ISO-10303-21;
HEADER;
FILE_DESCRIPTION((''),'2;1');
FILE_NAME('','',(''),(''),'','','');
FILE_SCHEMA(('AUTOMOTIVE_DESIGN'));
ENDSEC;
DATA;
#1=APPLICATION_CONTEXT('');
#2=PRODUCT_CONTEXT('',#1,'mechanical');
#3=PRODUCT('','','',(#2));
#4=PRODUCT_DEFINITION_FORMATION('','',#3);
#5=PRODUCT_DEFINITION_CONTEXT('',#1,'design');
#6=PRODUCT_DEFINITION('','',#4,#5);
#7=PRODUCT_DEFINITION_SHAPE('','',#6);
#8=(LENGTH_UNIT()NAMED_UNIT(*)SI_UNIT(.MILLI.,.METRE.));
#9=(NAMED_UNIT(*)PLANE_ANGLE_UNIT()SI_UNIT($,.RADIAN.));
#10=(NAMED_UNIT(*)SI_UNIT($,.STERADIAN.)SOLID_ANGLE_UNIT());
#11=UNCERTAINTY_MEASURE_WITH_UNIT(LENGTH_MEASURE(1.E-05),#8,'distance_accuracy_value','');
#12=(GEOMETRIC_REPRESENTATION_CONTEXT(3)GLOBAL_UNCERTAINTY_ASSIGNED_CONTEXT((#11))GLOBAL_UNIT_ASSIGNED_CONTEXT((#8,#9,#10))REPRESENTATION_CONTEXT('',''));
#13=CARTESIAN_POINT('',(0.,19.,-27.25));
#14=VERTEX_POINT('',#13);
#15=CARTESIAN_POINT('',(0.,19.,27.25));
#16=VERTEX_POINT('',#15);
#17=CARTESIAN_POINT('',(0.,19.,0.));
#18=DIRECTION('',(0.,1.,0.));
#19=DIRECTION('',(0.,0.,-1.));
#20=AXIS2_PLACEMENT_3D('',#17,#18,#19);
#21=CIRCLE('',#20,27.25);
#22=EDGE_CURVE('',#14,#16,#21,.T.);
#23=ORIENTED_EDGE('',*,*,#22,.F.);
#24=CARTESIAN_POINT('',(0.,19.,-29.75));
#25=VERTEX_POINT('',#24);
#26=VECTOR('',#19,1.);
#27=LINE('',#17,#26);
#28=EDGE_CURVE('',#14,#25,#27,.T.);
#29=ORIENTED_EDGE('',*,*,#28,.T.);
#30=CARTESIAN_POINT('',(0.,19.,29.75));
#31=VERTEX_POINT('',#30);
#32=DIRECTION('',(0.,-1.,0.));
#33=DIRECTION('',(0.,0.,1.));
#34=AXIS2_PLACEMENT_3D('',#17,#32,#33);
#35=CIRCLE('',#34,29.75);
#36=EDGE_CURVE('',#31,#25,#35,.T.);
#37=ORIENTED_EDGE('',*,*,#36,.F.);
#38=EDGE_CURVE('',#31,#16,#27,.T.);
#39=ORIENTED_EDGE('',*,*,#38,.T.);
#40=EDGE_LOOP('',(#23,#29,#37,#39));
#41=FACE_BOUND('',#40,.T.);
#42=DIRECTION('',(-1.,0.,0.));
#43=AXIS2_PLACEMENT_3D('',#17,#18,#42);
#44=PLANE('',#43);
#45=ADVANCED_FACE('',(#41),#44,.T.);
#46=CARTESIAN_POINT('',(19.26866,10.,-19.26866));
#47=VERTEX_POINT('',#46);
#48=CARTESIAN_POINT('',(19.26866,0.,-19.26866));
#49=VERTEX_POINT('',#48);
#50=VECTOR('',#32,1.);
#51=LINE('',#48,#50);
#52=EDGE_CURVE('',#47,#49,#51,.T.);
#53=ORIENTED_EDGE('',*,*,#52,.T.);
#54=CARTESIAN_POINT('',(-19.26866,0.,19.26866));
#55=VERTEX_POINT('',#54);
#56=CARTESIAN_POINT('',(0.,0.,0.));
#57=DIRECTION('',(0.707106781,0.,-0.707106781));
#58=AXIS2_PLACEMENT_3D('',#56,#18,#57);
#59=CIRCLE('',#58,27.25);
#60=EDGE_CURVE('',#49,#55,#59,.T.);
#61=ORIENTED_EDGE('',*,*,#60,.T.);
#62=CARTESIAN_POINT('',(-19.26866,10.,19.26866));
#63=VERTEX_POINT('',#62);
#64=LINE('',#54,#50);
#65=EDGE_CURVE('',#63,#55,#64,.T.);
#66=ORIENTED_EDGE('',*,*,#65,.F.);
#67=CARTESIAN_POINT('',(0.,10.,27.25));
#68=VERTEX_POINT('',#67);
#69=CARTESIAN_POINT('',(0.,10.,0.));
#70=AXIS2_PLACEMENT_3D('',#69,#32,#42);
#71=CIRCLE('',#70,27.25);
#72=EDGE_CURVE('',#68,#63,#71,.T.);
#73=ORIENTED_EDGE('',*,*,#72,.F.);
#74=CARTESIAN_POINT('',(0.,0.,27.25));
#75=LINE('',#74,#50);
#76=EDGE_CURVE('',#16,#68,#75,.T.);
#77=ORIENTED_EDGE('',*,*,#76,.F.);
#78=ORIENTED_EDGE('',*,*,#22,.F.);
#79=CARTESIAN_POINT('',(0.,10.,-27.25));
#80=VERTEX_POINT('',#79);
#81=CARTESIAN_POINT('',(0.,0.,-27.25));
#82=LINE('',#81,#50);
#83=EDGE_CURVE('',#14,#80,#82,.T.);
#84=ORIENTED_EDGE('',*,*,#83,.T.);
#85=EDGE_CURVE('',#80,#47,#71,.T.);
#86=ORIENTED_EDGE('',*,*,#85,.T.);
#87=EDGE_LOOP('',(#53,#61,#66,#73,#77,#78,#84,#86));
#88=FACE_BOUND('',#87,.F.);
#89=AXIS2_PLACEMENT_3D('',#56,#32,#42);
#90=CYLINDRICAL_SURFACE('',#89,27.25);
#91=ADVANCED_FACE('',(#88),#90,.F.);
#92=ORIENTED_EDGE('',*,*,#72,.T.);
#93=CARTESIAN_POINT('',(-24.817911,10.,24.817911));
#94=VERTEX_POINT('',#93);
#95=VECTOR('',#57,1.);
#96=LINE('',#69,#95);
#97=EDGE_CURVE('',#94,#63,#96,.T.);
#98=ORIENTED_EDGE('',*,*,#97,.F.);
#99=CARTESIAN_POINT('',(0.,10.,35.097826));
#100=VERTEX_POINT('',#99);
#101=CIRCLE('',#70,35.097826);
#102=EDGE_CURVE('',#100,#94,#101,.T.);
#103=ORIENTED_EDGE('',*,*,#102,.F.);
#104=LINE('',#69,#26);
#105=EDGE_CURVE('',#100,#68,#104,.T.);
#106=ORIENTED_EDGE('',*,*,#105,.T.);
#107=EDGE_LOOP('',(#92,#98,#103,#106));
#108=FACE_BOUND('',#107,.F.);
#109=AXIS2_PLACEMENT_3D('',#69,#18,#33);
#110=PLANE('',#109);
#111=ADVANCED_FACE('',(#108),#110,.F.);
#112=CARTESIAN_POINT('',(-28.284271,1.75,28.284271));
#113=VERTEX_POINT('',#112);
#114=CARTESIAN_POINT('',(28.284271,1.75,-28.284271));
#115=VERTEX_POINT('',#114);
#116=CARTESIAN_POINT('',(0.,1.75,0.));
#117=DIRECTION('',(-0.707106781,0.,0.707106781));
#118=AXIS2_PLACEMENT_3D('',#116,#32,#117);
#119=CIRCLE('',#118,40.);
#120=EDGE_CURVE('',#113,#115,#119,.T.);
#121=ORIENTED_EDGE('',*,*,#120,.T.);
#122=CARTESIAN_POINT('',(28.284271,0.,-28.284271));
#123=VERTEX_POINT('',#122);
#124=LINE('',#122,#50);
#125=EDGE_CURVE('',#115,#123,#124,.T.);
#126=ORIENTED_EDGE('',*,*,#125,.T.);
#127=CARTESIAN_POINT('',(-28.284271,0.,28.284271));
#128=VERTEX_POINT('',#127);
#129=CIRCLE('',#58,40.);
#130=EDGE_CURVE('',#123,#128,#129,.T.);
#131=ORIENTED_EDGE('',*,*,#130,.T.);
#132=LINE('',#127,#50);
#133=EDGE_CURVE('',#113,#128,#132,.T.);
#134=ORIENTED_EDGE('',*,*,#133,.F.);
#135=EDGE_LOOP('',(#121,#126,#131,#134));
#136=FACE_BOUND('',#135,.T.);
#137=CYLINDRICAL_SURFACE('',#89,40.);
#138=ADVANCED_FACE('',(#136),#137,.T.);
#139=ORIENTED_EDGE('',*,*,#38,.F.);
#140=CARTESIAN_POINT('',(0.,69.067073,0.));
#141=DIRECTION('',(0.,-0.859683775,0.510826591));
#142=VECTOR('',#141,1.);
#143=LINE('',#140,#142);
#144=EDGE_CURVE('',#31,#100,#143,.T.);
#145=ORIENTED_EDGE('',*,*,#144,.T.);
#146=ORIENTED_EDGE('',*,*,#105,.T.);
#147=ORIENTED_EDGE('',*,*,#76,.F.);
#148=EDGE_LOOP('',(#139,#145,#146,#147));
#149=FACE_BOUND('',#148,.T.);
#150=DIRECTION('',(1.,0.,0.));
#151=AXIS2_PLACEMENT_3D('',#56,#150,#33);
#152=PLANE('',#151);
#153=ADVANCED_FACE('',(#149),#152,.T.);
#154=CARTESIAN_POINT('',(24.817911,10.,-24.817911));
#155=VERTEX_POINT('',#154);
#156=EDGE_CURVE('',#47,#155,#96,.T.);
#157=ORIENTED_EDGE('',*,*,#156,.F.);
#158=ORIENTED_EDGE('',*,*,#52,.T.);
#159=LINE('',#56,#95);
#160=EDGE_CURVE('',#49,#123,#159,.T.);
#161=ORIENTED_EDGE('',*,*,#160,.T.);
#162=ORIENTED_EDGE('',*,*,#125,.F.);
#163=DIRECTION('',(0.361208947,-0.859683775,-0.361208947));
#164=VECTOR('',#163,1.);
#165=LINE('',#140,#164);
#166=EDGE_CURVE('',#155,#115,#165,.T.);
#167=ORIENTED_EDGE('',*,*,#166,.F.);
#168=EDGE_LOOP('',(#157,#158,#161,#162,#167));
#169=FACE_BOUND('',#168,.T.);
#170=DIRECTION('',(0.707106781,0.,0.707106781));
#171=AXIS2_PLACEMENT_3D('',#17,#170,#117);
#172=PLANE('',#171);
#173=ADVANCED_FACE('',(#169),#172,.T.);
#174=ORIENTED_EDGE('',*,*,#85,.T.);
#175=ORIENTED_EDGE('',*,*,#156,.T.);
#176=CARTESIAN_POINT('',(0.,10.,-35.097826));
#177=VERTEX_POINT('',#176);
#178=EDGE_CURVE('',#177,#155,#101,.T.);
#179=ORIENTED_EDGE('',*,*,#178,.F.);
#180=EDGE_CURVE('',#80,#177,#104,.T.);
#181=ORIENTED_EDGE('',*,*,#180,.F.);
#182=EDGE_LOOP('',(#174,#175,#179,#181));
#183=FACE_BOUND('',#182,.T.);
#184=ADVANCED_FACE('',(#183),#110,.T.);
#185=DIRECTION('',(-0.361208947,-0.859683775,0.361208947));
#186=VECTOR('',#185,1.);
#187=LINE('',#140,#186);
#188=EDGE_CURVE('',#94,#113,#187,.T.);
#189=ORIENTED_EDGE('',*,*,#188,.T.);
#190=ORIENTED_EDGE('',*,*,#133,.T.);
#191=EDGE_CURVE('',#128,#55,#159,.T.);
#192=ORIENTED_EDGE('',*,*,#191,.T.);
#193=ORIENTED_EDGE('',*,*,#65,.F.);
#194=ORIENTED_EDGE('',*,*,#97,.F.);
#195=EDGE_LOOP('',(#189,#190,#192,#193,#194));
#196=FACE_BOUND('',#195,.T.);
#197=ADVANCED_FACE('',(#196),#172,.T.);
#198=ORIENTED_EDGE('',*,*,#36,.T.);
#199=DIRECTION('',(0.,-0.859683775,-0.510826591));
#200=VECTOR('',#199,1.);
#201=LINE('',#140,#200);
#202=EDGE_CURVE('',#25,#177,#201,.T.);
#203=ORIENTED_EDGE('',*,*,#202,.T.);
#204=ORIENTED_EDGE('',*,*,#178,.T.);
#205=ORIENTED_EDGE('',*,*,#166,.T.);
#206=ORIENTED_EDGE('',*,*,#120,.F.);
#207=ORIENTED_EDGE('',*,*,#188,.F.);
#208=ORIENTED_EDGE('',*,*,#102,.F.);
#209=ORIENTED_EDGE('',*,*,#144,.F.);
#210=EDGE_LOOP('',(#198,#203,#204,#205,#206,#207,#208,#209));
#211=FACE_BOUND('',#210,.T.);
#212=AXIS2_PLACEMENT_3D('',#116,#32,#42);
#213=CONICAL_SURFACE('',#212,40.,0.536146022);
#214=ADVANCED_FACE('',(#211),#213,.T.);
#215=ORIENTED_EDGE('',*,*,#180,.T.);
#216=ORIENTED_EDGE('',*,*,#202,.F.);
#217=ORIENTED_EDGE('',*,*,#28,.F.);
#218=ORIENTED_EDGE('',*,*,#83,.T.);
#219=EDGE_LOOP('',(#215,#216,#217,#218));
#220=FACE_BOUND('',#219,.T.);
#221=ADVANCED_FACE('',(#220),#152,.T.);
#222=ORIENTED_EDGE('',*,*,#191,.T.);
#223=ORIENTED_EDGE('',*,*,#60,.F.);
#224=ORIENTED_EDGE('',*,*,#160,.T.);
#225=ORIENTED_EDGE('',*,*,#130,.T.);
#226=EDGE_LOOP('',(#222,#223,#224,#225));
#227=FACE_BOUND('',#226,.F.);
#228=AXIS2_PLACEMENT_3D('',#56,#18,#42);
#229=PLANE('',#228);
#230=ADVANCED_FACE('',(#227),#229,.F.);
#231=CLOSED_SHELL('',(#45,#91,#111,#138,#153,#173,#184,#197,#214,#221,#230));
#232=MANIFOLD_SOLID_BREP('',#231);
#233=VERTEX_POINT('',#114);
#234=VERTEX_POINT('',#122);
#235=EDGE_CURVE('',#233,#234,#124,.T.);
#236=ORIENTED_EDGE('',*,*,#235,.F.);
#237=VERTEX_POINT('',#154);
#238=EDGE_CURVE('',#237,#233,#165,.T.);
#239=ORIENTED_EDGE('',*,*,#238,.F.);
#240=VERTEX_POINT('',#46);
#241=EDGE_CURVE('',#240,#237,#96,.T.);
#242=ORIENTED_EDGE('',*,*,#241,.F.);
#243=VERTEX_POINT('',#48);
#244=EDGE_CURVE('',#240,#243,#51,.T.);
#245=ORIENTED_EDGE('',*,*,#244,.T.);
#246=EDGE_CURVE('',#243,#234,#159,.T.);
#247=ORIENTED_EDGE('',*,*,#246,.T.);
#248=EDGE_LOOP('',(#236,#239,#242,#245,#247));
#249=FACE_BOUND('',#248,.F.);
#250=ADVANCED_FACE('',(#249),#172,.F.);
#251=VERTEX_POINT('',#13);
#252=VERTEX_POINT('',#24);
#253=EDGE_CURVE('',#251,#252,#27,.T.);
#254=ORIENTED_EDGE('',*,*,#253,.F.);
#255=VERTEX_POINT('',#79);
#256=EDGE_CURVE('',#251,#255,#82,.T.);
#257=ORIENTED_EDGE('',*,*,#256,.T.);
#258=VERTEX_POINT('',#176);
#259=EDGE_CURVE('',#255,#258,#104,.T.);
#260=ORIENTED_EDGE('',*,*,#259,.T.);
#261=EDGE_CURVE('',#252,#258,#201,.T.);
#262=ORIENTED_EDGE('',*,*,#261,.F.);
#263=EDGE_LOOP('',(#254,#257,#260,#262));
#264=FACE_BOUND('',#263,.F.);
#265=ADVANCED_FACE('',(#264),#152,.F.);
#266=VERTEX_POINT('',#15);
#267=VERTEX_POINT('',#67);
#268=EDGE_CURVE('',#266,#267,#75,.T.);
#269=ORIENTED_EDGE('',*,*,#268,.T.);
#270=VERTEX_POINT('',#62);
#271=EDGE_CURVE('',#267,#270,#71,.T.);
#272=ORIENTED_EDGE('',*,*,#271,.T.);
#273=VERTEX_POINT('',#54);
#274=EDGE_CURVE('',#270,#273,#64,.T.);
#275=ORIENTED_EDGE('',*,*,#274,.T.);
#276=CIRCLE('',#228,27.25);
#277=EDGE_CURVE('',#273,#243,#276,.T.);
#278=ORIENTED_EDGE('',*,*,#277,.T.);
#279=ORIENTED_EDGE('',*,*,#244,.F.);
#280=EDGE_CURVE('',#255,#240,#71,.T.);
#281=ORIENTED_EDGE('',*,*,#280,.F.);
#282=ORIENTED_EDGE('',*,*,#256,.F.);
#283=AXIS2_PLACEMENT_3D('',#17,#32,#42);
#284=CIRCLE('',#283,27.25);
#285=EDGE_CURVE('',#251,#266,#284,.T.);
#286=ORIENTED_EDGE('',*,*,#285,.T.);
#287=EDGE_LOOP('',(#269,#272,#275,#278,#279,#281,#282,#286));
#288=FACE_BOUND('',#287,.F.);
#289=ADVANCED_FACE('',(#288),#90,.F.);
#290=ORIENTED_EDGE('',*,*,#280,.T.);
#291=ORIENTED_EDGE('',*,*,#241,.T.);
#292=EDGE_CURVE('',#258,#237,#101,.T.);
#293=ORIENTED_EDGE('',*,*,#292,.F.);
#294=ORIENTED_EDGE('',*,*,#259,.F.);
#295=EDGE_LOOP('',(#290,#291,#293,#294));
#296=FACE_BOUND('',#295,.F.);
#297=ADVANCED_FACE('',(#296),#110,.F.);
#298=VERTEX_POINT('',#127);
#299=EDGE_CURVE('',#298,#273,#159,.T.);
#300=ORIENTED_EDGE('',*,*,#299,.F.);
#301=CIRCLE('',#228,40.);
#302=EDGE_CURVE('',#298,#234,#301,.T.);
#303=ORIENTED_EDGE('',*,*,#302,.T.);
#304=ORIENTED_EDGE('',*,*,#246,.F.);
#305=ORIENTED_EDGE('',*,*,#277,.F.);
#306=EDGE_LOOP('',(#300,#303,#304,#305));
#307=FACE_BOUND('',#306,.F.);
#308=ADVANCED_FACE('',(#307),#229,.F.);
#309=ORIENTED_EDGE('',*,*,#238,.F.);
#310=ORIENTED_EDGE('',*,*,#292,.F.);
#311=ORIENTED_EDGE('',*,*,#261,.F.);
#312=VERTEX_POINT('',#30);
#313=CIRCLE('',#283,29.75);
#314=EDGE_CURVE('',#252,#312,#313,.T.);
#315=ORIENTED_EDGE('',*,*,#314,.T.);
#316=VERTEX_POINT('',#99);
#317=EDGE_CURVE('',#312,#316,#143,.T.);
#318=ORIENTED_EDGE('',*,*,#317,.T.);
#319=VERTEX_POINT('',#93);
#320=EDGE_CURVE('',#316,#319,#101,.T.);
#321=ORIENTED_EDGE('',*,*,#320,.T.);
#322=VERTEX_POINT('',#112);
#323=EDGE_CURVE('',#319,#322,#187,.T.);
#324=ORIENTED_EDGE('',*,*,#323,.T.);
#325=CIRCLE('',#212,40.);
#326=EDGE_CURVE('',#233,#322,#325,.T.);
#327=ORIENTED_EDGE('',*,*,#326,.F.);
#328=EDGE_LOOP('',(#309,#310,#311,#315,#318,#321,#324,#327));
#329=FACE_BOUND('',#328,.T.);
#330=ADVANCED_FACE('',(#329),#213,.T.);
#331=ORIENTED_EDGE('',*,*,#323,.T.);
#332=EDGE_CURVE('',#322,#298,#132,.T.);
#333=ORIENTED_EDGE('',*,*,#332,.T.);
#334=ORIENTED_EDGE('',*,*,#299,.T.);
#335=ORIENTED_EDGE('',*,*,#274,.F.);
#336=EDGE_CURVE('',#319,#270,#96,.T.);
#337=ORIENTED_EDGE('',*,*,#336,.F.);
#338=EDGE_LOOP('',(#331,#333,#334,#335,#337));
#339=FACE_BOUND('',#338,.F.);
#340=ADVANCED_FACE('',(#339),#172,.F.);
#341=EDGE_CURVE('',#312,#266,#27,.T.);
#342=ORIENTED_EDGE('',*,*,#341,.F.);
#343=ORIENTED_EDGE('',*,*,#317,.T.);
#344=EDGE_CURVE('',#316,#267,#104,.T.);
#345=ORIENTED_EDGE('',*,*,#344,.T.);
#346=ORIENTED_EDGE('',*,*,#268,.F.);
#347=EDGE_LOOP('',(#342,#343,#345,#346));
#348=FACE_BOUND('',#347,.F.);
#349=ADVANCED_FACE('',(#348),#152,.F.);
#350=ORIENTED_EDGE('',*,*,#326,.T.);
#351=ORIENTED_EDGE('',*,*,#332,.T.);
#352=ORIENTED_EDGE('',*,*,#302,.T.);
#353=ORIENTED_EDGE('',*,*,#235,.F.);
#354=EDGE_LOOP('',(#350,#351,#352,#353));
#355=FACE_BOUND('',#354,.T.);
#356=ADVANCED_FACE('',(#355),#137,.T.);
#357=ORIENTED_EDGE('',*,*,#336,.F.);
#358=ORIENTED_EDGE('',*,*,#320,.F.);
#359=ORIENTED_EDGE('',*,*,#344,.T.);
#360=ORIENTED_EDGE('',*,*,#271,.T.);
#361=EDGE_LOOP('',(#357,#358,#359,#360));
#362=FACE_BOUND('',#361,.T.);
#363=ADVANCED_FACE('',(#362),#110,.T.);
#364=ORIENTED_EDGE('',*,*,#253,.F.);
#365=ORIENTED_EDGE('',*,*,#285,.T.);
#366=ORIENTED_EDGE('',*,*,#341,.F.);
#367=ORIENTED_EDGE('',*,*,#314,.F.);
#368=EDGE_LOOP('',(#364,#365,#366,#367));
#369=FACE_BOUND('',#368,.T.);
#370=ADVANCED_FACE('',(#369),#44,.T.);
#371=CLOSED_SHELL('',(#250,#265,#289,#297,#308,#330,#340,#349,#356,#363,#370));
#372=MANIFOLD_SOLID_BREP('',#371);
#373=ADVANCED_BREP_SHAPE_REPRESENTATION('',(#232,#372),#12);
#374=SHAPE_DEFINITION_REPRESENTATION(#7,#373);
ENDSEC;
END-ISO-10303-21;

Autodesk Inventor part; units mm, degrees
ref_plane "YZ Plane" through (0, 0, 0) normal (1, 0, 0) x (0, 1, 0)
sketch "Sketch1" plane through (0, 0, 0) normal (0, 1, 0) x (-1, 0, 0)
  circle A0 centre (0, 0) radius 27.25
  circle A1 centre (0, 0) radius 40
  line L0 (0, 0) -> (40, 0)
  line L1 (0, 0) -> (-40, 0)
  dimension "d0" = 54.5
  dimension "d1" = 80
  dimension "d2" = 12.75
extrude "Extrusion1" add sketch "Sketch1" along normal blind 19 contours L0 A1 L1 A0 | A0 L1 A1 L0
chamfer "Chamfer2" distance 10.25 distance2 17.25 1 edges at (40, 19, 0) measured on face at (17.5776, 19, -30.8976)
ref_plane "Work Plane1" through (0, 10, 0) normal (0, 1, 0) x (-1, 0, 0)
split body "Split1" result two bodies by plane through (0, 10, 0) normal (0, 1, 0) first body at (-8.6629, 11.2446, 32.6469)
split body "Split2" result two bodies by plane through (0, 0, 0) normal (1, 0, 0) bodies 2 first body at (2.4575, 12.7446, 32.7934)
sketch "Sketch2" plane through (0, 19, 0) normal (0, 1, 0) x (1, 0, 0)
  arc A0 (0, 27.25) -> (-27.25, 0) centre (0, 0) ccw projected
  line L0 (-27.25, 0) -> (27.25, 0)
  arc A1 (0, -27.25) -> (0, 27.25) centre (0, 0) ccw projected
  line L1 (0, 0) -> (-21.0364, -21.0364)
  arc A2 (-29.75, 0) -> (0, -29.75) centre (0, 0) ccw projected
  line L2 (0, 0) -> (29.75, 0) construction
  dimension "d12" = 135
ref_plane "Work Plane2" through (0, 19, 0) normal (0.7071068, 0, 0.7071068) x (-0.7071068, 0, 0.7071068)
split body "Split3" result two bodies by plane through (0, 19, 0) normal (0.7071068, 0, 0.7071068) bodies 3 first body at (25.9031, 0.5, 24.3547)
combine bodies "Combine1" operation type add bodies to combine 6 4
combine bodies "Combine2" operation type add bodies to combine 7 5
properties part number "Kolanko"
